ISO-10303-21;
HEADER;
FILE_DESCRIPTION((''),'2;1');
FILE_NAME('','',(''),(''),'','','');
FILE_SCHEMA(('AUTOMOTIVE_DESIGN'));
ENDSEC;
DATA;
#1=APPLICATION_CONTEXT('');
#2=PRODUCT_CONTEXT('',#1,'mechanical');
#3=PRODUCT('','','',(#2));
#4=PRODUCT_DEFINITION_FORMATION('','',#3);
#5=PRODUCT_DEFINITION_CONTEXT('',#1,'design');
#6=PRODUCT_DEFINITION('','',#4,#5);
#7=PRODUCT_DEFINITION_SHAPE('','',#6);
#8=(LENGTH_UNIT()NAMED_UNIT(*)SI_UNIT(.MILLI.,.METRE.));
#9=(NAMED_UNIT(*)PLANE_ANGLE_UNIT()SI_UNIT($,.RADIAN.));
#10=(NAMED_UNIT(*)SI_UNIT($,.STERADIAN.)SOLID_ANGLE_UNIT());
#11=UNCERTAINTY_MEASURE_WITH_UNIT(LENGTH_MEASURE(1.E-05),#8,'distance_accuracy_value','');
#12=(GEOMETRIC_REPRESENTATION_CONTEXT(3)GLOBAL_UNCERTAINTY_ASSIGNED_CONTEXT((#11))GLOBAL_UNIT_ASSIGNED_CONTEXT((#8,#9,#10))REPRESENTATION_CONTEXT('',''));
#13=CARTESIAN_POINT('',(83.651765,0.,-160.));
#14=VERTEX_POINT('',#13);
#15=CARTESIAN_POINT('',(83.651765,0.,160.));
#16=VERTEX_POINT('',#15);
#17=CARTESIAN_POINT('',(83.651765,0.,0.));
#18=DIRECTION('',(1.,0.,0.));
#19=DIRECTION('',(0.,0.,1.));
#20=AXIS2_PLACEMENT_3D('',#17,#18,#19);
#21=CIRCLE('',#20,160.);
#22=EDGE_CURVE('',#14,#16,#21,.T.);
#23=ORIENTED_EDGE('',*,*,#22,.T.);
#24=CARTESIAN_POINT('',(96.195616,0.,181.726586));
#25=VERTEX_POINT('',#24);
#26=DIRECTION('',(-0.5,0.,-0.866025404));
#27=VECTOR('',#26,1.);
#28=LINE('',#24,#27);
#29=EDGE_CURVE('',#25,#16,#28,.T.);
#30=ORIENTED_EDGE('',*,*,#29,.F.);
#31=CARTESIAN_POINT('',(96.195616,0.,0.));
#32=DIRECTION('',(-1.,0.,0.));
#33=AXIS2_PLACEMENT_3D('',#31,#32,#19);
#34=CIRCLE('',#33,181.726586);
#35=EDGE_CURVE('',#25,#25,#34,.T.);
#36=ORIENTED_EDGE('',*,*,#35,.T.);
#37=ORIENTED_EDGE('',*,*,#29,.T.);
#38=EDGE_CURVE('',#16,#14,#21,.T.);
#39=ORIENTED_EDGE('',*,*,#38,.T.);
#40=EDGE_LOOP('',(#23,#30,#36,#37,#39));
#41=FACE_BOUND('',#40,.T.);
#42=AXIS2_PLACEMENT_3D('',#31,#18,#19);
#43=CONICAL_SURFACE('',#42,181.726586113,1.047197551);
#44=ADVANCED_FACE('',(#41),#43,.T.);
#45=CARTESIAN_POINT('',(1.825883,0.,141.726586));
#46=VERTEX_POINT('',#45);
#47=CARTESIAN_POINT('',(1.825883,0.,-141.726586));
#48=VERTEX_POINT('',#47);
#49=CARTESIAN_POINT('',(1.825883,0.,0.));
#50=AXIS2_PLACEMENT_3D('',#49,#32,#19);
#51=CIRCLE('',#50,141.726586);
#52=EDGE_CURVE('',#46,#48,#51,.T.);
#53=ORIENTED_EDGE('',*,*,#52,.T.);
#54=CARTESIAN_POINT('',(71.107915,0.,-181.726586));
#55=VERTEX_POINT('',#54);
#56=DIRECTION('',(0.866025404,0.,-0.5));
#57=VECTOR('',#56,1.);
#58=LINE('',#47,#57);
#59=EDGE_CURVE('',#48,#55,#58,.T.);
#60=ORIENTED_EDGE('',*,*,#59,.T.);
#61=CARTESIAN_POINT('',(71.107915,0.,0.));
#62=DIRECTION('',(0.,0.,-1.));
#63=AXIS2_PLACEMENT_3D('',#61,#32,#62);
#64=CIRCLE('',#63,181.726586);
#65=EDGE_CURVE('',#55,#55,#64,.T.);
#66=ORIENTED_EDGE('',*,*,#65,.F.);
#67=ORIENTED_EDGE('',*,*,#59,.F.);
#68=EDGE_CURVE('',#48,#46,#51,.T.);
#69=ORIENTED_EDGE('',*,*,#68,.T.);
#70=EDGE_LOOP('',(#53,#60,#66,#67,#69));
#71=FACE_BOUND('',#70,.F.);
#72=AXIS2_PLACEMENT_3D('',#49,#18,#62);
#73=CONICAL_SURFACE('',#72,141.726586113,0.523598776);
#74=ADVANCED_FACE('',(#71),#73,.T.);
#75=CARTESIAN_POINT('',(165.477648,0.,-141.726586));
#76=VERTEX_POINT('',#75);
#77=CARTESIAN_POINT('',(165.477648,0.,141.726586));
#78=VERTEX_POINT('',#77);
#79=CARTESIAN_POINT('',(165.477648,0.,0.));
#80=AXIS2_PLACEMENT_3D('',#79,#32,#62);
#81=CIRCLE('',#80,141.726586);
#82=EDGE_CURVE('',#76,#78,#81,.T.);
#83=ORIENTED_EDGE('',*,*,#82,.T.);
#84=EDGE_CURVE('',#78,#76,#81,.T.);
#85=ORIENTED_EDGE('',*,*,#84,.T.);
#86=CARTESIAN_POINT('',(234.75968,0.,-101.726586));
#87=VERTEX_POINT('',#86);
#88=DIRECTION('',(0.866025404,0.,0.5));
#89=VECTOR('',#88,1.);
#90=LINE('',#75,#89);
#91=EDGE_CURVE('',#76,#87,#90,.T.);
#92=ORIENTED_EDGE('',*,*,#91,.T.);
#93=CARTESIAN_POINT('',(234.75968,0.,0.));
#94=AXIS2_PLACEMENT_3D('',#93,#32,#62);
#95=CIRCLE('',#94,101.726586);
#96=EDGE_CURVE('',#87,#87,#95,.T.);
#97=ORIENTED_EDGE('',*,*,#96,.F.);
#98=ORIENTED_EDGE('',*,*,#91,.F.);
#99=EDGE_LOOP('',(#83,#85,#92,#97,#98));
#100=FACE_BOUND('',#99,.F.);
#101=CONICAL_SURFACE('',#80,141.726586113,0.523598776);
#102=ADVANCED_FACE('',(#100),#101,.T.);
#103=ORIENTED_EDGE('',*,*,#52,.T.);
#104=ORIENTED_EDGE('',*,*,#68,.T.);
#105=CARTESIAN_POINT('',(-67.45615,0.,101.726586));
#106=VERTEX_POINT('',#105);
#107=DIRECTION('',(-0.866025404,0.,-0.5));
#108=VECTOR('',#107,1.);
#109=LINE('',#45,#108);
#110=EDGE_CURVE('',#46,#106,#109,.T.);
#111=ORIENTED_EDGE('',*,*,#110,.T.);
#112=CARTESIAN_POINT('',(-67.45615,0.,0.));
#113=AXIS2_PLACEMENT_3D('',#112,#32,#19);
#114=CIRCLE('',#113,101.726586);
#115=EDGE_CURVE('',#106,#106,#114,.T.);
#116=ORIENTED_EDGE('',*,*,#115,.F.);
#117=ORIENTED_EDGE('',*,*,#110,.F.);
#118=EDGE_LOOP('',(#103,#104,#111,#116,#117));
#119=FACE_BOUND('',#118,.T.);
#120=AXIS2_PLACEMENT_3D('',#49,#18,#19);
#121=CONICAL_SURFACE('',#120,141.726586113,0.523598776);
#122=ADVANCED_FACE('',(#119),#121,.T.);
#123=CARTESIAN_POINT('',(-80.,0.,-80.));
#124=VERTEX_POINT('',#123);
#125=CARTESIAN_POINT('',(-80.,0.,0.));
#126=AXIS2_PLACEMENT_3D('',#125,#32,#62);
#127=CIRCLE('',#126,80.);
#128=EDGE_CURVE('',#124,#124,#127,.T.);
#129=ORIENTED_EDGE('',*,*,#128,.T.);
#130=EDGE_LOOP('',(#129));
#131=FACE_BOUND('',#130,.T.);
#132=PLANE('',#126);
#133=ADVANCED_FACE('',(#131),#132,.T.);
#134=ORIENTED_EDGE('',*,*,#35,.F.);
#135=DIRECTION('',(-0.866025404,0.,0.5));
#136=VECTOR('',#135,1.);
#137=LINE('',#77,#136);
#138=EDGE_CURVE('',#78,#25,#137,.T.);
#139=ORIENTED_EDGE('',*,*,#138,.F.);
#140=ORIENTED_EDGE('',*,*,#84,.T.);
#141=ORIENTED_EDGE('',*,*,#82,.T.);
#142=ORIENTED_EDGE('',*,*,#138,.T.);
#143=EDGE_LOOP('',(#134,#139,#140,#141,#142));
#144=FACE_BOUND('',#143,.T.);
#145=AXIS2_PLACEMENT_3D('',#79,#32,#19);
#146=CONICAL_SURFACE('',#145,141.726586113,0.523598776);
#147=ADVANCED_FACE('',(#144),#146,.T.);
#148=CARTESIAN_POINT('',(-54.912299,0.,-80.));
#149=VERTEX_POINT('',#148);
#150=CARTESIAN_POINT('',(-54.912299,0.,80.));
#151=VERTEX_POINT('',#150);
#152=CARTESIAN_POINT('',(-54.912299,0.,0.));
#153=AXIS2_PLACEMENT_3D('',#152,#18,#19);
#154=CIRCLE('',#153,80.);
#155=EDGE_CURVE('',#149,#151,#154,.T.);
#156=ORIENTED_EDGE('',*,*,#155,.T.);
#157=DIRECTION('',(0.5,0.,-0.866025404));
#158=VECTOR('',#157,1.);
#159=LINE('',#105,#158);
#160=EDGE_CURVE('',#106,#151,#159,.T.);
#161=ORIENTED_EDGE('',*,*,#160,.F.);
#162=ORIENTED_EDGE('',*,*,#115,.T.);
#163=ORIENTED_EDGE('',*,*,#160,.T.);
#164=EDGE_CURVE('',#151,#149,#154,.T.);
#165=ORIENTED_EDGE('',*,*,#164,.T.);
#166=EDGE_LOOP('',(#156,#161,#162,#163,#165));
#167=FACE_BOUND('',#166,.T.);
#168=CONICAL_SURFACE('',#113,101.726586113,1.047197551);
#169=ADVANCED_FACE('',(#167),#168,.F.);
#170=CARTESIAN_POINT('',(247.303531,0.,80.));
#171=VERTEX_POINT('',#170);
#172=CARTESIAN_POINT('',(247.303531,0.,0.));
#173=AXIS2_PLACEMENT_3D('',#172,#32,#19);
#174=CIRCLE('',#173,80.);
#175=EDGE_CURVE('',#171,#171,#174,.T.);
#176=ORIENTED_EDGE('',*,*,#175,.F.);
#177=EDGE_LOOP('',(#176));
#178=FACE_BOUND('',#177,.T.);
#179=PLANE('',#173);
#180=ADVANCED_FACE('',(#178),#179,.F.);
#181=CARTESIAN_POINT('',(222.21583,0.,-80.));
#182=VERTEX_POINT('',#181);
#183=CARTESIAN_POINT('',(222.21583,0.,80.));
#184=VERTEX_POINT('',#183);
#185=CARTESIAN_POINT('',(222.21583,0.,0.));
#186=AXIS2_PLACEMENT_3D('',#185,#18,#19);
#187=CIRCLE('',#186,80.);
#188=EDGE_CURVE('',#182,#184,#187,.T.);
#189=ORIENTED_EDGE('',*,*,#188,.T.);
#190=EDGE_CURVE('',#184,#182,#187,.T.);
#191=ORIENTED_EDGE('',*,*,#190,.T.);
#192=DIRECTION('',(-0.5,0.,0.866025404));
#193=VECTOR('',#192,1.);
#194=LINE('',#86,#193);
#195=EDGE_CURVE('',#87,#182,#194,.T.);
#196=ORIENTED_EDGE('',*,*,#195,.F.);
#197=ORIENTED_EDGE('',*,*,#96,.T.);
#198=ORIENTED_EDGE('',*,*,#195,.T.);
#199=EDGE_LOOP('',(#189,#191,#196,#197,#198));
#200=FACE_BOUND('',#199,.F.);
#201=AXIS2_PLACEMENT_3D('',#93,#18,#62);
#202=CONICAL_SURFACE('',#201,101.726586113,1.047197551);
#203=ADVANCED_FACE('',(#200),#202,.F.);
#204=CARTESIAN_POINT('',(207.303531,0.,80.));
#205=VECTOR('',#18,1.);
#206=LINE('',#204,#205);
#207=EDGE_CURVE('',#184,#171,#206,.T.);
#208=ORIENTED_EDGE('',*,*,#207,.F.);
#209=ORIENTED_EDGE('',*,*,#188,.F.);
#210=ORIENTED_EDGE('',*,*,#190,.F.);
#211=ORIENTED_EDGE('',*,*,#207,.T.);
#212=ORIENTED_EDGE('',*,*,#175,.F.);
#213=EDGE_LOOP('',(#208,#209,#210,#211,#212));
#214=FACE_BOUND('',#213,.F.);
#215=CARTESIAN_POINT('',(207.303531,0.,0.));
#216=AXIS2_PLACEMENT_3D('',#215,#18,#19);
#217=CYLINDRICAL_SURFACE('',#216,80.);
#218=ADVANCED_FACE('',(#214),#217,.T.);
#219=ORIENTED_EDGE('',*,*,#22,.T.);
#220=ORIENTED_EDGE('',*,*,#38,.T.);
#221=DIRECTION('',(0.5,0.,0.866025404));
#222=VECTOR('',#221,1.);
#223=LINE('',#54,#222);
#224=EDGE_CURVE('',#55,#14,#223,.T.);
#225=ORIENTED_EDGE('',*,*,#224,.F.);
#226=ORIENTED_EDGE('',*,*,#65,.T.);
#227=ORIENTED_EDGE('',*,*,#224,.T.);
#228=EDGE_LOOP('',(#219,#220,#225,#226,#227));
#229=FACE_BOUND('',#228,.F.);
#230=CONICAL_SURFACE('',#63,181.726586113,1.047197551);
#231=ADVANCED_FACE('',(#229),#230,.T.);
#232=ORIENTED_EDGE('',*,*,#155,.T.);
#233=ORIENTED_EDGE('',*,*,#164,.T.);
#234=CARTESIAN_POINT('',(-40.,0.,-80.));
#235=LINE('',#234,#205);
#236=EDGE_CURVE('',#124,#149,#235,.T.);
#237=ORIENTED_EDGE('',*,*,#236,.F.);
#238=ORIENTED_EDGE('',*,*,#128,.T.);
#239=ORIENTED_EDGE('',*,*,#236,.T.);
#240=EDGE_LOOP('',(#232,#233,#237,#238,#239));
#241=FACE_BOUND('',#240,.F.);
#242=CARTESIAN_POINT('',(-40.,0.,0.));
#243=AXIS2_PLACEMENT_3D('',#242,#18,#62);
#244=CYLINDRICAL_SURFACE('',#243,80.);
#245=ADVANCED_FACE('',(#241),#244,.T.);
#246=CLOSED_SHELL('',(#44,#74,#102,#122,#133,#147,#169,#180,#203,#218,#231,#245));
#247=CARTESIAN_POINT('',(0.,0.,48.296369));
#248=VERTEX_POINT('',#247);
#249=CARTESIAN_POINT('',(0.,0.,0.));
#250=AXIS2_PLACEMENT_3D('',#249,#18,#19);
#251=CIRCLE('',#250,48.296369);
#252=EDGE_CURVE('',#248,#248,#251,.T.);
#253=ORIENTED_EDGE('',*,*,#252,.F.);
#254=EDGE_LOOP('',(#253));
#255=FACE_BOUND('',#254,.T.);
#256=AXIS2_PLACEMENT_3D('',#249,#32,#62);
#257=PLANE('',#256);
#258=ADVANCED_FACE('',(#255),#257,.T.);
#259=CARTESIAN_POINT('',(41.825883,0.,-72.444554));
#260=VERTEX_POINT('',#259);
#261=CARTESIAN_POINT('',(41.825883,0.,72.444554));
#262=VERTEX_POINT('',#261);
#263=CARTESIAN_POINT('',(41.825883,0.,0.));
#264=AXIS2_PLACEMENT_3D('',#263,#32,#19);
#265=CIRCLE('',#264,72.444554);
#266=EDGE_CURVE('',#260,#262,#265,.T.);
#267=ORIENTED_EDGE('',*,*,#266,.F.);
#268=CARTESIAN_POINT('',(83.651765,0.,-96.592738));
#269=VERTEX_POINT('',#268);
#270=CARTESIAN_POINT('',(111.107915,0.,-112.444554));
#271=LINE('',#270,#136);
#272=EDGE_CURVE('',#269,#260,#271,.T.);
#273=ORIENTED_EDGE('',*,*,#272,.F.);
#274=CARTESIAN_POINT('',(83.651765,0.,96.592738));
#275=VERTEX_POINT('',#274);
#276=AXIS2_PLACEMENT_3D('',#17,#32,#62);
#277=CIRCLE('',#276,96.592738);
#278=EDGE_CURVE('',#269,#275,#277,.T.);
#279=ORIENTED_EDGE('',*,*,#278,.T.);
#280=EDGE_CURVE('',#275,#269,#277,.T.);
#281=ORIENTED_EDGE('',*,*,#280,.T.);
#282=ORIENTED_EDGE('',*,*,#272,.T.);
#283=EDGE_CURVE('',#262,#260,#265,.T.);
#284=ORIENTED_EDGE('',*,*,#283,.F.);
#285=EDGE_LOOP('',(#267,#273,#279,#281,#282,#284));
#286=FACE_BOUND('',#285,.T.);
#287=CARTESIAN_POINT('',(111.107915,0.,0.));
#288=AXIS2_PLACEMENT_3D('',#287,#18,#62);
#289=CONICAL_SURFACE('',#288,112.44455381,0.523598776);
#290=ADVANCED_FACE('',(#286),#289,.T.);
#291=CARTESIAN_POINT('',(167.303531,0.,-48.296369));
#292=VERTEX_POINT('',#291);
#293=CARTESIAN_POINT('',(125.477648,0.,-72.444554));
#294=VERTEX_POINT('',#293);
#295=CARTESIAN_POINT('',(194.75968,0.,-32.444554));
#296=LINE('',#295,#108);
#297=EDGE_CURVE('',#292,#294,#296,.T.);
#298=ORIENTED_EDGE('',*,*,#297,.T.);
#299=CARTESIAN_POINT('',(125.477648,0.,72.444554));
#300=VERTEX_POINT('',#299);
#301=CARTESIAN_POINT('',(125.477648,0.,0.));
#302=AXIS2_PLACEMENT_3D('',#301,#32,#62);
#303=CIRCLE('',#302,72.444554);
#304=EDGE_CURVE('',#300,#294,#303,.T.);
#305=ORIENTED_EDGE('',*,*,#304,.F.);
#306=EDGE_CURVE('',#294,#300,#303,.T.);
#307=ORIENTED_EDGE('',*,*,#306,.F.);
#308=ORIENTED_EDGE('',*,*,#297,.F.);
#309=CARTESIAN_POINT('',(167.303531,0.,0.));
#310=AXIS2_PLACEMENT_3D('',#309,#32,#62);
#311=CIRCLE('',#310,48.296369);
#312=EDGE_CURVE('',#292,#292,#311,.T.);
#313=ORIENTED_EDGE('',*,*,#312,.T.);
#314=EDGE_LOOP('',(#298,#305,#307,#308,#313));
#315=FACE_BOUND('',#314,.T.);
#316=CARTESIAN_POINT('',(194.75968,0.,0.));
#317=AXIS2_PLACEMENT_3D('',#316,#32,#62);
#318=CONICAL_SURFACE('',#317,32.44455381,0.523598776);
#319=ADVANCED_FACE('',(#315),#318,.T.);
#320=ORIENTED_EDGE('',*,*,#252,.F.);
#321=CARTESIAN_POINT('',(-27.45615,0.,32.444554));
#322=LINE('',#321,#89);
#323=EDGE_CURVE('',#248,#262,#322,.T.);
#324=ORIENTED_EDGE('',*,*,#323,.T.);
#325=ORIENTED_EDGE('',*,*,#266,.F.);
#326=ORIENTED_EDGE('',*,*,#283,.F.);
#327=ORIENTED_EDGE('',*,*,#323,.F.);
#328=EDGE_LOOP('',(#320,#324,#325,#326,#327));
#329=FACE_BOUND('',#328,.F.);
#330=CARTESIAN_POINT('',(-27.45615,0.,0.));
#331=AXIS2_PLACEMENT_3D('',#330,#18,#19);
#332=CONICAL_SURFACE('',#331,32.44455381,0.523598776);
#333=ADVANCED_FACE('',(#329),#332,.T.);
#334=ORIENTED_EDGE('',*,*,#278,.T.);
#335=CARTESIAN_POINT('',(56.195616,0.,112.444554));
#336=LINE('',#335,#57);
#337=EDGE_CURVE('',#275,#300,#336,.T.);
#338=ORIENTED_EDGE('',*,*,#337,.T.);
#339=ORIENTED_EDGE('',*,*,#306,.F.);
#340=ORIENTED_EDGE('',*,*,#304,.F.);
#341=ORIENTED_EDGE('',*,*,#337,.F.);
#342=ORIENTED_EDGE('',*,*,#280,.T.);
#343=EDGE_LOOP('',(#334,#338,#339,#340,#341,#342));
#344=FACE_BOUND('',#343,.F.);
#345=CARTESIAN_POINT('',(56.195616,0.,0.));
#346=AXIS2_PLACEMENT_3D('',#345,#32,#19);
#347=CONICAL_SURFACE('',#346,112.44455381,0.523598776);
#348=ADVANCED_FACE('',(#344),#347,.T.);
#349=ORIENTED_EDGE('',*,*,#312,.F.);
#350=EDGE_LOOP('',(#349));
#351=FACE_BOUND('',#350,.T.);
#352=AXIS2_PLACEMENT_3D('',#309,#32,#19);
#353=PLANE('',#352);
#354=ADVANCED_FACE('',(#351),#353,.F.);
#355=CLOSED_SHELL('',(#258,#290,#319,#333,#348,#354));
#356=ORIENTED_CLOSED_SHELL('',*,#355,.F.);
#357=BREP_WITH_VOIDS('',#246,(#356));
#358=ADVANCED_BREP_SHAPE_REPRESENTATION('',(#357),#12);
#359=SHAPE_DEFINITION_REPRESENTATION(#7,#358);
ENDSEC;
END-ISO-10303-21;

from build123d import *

# Parameters (mm, degrees)
F0_W = 80
F0_H = 80


# Not quite as in the source:
# - after a boolean that leaves OpenCascade's solid faulty, fix() repairs it


with BuildPart() as f1:
    # F0 (on Front) → F1 (revolve)
    with BuildSketch(Plane.XZ):
        with Locations((207.3035305738, 40)):
            Rectangle(F0_W, F0_H)
        Polygon((194.7596802331, -32.4445538099), (125.4776479304, -72.4445538099), (165.4776479304, -141.7265861126), (234.7596802331, -101.7265861126), align=None)
        with Locations((-40, -40)):
            Rectangle(F0_W, F0_H)
        Polygon((111.1079149462, -112.4445538099), (41.8258826435, -72.4445538099), (1.8258826435, -141.7265861126), (71.1079149462, -181.7265861126), align=None)
        Polygon((125.4776479304, 72.4445538099), (165.4776479304, 141.7265861126), (96.1956156276, 181.7265861126), (56.1956156276, 112.4445538099), align=None)
        Polygon((41.8258826435, 72.4445538099), (1.8258826435, 141.7265861126), (-67.4561496593, 101.7265861126), (-27.4561496593, 32.4445538099), align=None)
    revolve(axis=Axis((207.3035305738, 0, 0), (-1, 0, 0)))

    add(f1.part.fix(), mode=Mode.REPLACE)


solid = f1.part
